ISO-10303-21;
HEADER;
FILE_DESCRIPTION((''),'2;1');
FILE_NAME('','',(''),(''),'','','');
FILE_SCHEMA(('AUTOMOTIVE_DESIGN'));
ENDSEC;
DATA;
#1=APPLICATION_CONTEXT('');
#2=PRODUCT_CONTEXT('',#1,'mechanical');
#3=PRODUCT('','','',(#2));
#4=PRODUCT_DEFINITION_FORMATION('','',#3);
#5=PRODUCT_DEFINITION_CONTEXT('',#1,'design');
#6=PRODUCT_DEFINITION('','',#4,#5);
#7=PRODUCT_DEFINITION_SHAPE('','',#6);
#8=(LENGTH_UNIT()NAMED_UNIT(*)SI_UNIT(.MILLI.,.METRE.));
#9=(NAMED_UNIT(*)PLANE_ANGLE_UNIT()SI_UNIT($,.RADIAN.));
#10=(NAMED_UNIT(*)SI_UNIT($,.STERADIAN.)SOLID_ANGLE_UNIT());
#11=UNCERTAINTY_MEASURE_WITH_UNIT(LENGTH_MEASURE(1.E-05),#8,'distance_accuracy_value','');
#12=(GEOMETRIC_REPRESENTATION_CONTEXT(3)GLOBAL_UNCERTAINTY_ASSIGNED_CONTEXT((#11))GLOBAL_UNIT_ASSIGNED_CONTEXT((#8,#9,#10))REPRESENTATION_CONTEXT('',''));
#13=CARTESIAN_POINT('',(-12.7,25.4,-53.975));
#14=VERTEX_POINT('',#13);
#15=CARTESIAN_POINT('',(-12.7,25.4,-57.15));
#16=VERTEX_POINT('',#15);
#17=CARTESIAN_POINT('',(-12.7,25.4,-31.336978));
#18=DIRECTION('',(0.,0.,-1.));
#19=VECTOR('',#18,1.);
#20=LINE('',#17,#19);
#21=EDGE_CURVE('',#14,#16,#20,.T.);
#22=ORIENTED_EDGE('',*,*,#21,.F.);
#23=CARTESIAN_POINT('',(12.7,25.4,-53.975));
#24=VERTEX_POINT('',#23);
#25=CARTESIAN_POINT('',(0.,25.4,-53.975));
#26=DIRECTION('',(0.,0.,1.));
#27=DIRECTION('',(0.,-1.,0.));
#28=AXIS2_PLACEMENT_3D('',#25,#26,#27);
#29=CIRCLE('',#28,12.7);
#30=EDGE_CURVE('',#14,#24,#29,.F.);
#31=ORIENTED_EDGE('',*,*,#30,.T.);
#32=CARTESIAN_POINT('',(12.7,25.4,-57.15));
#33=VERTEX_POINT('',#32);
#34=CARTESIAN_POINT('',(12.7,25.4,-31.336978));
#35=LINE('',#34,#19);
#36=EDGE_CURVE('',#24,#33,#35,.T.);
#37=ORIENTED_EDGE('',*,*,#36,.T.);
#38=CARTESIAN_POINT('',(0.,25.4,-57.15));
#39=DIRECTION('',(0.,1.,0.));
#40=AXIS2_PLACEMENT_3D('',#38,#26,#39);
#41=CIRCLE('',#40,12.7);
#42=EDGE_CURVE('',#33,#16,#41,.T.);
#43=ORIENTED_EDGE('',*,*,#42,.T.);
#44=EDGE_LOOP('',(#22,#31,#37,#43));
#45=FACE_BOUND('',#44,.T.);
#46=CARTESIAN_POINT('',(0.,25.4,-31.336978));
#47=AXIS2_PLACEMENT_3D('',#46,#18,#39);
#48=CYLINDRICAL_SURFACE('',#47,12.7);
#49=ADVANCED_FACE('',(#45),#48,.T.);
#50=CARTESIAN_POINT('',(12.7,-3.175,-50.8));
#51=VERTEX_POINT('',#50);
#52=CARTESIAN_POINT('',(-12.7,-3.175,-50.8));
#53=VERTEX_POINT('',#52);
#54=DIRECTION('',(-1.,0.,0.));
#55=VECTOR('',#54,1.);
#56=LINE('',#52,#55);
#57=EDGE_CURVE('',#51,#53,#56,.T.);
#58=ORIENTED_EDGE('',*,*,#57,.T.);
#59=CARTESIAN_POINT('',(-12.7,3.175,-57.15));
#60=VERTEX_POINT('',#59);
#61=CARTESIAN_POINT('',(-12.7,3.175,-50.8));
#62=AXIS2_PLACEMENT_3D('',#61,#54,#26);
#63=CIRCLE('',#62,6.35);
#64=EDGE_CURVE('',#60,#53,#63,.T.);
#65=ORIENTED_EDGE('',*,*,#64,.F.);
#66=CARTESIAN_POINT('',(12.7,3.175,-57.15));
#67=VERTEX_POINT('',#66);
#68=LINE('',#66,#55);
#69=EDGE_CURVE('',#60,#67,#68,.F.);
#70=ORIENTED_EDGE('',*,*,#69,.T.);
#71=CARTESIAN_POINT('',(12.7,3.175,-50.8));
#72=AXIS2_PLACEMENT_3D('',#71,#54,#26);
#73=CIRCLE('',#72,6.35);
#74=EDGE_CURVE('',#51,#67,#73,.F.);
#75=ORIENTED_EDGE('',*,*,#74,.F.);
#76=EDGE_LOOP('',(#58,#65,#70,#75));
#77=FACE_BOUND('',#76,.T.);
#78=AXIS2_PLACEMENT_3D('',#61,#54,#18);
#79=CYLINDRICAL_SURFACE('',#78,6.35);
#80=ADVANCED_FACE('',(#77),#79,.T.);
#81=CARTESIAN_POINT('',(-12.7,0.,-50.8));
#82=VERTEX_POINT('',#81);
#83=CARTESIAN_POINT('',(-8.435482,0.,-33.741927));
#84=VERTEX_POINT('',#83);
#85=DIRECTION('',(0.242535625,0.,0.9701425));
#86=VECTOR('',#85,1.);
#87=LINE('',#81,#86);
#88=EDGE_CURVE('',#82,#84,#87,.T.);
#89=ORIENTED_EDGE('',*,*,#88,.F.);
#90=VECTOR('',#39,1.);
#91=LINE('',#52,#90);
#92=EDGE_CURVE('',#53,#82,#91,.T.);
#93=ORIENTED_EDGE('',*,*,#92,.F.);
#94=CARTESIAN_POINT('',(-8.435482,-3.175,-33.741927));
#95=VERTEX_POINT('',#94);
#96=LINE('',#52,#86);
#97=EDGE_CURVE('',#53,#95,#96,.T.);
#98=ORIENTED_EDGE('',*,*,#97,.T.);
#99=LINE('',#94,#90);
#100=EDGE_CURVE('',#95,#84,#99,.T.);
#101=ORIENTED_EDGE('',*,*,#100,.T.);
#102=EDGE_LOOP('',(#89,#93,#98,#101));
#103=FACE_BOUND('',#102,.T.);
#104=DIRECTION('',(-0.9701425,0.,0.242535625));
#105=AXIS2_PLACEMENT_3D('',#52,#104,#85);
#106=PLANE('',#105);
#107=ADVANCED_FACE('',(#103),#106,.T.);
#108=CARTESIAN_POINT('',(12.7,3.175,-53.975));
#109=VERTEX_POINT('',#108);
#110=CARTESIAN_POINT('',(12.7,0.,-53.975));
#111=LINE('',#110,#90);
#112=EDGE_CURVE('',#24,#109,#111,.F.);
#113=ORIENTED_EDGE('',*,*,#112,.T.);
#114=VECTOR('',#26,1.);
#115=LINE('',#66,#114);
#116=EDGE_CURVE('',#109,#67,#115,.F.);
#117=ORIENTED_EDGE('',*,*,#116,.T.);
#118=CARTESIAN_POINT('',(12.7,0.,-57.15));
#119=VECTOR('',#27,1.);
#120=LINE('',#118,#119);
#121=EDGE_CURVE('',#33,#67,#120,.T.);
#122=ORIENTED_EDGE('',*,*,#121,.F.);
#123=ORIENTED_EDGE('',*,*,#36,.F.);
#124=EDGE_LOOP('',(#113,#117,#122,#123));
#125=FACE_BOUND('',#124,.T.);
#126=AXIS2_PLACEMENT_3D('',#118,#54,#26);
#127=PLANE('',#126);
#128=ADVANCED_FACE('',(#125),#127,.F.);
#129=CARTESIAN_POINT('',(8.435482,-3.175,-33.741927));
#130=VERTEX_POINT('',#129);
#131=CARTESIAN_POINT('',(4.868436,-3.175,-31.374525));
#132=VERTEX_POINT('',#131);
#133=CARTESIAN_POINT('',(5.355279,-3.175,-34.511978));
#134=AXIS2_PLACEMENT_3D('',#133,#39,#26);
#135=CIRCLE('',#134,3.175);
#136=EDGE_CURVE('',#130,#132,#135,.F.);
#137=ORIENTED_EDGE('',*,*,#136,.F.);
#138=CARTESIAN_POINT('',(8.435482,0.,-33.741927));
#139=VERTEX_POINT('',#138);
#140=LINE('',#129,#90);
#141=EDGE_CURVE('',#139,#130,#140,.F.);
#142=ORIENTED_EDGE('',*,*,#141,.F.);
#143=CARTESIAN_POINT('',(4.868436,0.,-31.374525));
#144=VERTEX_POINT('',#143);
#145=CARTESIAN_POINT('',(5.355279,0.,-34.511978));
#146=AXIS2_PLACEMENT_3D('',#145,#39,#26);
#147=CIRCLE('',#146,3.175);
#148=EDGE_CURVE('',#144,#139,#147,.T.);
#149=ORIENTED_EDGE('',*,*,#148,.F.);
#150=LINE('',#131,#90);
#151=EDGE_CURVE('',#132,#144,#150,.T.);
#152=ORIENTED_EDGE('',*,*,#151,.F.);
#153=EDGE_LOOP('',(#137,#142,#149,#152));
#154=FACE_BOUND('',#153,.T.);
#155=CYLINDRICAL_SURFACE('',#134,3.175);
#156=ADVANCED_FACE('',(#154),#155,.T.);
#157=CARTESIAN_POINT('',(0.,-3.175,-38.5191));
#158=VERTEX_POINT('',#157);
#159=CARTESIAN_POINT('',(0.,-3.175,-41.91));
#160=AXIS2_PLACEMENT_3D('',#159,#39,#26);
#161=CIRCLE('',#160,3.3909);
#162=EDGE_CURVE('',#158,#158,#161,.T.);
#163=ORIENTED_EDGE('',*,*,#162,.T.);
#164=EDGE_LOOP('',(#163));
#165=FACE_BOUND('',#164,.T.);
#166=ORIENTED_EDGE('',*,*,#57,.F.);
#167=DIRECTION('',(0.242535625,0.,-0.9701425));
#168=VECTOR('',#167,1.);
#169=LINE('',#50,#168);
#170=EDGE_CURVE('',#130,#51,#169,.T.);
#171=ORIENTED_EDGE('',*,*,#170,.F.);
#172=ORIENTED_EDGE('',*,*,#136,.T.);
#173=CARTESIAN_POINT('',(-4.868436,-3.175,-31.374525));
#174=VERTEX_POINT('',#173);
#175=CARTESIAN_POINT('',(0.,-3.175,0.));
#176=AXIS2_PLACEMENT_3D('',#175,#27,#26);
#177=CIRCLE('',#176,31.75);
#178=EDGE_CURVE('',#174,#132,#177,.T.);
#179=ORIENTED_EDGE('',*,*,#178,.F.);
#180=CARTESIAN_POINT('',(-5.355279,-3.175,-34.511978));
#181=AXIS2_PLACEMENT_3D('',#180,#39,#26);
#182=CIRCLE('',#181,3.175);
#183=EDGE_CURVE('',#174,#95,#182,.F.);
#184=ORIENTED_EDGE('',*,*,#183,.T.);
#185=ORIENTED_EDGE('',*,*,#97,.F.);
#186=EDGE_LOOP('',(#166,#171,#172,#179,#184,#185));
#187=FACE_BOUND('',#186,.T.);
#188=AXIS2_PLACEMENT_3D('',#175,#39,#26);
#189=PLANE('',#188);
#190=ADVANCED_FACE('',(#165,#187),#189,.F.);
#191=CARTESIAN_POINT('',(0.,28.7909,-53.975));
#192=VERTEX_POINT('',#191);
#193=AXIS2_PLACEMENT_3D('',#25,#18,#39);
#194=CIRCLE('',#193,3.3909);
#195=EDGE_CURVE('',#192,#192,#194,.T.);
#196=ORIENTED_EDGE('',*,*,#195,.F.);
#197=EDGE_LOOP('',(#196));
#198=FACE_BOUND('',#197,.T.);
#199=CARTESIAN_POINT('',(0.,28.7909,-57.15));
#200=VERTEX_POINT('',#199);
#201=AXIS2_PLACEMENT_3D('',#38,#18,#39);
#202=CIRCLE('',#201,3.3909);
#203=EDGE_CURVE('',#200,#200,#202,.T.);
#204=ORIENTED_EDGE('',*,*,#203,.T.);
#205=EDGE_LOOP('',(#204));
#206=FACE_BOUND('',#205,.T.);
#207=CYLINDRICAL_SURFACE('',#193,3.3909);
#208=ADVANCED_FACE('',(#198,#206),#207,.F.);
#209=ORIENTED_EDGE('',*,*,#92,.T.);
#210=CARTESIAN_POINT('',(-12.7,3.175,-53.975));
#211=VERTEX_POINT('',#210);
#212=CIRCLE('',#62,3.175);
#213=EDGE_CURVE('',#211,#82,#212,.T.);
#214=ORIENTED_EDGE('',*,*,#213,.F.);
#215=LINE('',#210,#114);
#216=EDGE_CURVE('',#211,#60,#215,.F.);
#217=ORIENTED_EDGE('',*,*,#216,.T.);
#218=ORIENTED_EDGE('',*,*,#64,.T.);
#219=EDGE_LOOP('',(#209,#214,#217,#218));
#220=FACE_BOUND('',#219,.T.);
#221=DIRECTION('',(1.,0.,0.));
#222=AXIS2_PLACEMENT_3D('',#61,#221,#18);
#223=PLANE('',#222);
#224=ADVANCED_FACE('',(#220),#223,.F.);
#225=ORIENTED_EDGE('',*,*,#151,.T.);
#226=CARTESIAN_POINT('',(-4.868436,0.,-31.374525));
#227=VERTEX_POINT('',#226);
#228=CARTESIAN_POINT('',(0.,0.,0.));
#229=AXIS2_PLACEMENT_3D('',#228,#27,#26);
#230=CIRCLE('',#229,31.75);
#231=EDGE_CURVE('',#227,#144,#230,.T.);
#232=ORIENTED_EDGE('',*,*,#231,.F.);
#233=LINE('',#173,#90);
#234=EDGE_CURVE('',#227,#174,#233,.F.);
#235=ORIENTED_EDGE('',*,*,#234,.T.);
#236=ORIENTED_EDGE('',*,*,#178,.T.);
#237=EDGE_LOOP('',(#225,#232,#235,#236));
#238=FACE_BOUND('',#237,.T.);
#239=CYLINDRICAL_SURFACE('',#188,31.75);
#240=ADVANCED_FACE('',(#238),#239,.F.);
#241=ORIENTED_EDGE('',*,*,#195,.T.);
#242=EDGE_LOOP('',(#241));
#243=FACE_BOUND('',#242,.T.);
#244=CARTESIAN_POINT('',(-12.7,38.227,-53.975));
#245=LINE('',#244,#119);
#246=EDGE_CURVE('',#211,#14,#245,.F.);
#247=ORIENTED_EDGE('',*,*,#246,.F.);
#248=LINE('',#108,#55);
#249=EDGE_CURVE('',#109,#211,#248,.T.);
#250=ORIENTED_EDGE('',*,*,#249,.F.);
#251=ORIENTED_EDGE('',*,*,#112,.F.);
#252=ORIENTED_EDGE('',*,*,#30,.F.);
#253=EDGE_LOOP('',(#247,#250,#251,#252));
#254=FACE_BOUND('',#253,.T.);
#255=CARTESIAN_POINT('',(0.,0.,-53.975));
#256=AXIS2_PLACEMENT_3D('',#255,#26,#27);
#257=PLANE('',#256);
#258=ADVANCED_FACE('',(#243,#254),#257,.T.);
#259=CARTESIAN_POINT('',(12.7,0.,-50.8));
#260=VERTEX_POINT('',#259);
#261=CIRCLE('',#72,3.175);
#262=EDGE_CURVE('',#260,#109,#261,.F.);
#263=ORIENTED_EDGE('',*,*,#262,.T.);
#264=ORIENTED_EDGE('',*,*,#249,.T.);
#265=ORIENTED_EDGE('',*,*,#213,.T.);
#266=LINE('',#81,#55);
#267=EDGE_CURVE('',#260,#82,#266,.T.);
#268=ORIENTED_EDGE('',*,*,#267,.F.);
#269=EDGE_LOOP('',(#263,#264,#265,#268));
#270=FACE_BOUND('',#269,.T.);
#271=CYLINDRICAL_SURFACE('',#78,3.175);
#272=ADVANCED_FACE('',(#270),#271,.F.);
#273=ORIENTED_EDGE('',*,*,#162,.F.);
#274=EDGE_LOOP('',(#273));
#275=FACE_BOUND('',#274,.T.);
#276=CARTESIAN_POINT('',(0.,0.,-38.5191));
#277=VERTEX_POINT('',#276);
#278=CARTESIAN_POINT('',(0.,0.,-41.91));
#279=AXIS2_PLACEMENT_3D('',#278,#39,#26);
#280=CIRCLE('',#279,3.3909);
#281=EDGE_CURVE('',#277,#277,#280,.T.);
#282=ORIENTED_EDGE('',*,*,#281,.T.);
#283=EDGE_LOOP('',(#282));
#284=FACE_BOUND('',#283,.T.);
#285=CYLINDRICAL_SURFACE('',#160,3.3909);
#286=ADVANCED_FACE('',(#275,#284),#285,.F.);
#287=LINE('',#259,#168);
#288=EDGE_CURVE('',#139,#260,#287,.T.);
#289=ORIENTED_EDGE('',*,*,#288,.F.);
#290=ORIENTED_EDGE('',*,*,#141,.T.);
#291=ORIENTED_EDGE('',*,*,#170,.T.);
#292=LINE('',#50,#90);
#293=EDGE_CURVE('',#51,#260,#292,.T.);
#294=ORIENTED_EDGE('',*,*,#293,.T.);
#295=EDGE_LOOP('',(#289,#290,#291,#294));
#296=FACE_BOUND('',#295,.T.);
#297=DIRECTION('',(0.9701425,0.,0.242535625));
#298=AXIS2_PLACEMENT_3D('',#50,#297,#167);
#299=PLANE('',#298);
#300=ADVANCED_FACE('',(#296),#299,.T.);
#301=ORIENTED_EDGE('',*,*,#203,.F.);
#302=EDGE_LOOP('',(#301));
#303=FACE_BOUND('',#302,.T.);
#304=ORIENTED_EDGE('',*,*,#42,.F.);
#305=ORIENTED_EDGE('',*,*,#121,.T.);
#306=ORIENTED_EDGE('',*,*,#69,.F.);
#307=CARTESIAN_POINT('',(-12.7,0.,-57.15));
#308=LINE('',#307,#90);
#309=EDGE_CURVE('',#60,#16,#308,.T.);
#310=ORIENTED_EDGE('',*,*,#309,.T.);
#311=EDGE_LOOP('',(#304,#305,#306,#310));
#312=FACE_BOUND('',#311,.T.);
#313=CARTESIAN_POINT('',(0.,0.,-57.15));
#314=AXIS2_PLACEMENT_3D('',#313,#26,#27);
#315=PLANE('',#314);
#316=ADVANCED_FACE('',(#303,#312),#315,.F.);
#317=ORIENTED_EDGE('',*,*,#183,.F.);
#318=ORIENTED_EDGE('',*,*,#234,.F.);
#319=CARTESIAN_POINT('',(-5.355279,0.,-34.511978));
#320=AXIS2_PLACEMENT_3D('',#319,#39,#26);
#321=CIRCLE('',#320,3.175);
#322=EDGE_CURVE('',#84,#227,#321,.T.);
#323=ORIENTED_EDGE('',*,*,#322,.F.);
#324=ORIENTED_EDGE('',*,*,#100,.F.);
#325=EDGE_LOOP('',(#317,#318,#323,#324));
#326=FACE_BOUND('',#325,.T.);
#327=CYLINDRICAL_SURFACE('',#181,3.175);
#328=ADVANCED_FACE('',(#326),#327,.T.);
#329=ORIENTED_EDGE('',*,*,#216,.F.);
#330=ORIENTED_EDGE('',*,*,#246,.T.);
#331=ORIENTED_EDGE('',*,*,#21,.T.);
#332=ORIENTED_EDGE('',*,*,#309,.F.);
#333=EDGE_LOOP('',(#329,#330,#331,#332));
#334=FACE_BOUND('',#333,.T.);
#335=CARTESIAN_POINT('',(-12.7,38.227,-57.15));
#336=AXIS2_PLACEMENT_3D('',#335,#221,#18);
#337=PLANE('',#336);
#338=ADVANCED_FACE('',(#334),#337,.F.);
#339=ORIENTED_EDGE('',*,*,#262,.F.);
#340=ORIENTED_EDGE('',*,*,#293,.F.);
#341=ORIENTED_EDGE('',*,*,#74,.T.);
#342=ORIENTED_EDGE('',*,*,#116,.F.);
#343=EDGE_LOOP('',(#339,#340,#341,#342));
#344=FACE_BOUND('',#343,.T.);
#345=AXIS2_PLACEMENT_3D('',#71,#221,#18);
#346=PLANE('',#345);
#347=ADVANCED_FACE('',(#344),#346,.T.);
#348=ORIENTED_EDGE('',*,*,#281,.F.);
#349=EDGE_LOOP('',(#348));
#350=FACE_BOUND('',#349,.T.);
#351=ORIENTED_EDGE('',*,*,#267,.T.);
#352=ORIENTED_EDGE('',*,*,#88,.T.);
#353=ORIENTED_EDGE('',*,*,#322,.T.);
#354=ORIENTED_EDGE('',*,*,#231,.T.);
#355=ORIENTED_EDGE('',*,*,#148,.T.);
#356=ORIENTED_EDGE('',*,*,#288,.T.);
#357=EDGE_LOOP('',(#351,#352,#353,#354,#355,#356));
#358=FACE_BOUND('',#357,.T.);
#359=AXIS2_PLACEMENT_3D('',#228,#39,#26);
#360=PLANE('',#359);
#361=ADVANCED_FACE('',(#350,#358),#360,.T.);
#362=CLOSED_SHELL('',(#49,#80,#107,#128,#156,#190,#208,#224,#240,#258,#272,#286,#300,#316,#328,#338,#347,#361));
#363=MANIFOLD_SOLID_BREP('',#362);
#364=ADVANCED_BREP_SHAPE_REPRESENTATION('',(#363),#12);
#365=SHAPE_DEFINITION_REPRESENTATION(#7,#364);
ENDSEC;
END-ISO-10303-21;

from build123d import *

# Parameters (mm, degrees)
SKETCH1_R          = 3.3909
BASE_FLANGE1_DEPTH = 3.175
EDGE_FLANGE1_DEPTH = 25.4
FILLET1_R          = 3.175
HOLE2_START        = -57.15
HOLE2_OUTLINE_R    = 3.3909
HOLE2_DEPTH        = 3.175
CUT_EXTRUDE1_DEPTH = 48.842508784


# Read off the part's stored shape, not the designer's step: Hole2
# Sheet-metal steps are written as plain solids
with BuildPart() as part:
    # Sketch1 → Base-Flange1 (new body)
    with BuildSketch(Plane(origin=(0, 0, 0), x_dir=(1, 0, 0), z_dir=(0, 1, 0))):
        with BuildLine():
            Line((-12.7, 50.8), (12.7, 50.8))
            Line((12.7, 50.8), (7.700506095, 30.80202438))
            ThreePointArc((7.700506095, 30.80202438), (0, 31.75), (-7.700506095, 30.80202438))
            Line((-7.700506095, 30.80202438), (-12.7, 50.8))
        make_face()
        with Locations(Location((0, 41.91, 0), (0, 0, 270))):
            Circle(SKETCH1_R, mode=Mode.SUBTRACT)
    extrude(amount=-BASE_FLANGE1_DEPTH)

    # Edge-Flange1 section (across the edge) → Edge-Flange1 (add)
    with BuildSketch(Plane(origin=(12.7, 0, -53.975), x_dir=(0, 0, 1), z_dir=(-1, 0, 0))):
        with BuildLine():
            Line((-3.175, 3.175), (-3.175, 38.227))
            Line((-3.175, 38.227), (0, 38.227))
            Line((0, 38.227), (0, 3.175))
            ThreePointArc((0, 3.175), (0.92993597, 0.92993597), (3.175, 0))
            Line((3.175, 0), (3.175, -3.175))
            ThreePointArc((3.175, -3.175), (-1.315128061, -1.315128061), (-3.175, 3.175))
        make_face()
    extrude(amount=EDGE_FLANGE1_DEPTH)

    # Fillet1
    fillet1_edges = [part.edges().sort_by_distance(p)[0] for p in [
        (7.700506095, -1.5875, -30.80202438),
        (-7.700506095, -1.5875, -30.80202438),
    ]]
    fillet(fillet1_edges, radius=FILLET1_R)

    # Hole2 outline → Hole2 (cut)
    with BuildSketch(Plane.XY.offset(HOLE2_START)):
        with Locations((0, 25.4)):
            Circle(HOLE2_OUTLINE_R)
    extrude(amount=HOLE2_DEPTH, mode=Mode.SUBTRACT)

    # Sketch11 → Cut-Extrude1 (cut, through all)
    with BuildSketch(Plane(origin=(0, 0, -57.15), x_dir=(-1, 0, 0), z_dir=(0, 0, -1))):
        with BuildLine():
            Line((-12.7, 25.4), (-12.7, 38.227))
            Line((-12.7, 38.227), (12.7, 38.227))
            Line((12.7, 38.227), (12.7, 25.4))
            ThreePointArc((12.7, 25.4), (0, 38.1), (-12.7, 25.4))
        make_face()
    extrude(amount=-CUT_EXTRUDE1_DEPTH, mode=Mode.SUBTRACT)


solid = part.part
